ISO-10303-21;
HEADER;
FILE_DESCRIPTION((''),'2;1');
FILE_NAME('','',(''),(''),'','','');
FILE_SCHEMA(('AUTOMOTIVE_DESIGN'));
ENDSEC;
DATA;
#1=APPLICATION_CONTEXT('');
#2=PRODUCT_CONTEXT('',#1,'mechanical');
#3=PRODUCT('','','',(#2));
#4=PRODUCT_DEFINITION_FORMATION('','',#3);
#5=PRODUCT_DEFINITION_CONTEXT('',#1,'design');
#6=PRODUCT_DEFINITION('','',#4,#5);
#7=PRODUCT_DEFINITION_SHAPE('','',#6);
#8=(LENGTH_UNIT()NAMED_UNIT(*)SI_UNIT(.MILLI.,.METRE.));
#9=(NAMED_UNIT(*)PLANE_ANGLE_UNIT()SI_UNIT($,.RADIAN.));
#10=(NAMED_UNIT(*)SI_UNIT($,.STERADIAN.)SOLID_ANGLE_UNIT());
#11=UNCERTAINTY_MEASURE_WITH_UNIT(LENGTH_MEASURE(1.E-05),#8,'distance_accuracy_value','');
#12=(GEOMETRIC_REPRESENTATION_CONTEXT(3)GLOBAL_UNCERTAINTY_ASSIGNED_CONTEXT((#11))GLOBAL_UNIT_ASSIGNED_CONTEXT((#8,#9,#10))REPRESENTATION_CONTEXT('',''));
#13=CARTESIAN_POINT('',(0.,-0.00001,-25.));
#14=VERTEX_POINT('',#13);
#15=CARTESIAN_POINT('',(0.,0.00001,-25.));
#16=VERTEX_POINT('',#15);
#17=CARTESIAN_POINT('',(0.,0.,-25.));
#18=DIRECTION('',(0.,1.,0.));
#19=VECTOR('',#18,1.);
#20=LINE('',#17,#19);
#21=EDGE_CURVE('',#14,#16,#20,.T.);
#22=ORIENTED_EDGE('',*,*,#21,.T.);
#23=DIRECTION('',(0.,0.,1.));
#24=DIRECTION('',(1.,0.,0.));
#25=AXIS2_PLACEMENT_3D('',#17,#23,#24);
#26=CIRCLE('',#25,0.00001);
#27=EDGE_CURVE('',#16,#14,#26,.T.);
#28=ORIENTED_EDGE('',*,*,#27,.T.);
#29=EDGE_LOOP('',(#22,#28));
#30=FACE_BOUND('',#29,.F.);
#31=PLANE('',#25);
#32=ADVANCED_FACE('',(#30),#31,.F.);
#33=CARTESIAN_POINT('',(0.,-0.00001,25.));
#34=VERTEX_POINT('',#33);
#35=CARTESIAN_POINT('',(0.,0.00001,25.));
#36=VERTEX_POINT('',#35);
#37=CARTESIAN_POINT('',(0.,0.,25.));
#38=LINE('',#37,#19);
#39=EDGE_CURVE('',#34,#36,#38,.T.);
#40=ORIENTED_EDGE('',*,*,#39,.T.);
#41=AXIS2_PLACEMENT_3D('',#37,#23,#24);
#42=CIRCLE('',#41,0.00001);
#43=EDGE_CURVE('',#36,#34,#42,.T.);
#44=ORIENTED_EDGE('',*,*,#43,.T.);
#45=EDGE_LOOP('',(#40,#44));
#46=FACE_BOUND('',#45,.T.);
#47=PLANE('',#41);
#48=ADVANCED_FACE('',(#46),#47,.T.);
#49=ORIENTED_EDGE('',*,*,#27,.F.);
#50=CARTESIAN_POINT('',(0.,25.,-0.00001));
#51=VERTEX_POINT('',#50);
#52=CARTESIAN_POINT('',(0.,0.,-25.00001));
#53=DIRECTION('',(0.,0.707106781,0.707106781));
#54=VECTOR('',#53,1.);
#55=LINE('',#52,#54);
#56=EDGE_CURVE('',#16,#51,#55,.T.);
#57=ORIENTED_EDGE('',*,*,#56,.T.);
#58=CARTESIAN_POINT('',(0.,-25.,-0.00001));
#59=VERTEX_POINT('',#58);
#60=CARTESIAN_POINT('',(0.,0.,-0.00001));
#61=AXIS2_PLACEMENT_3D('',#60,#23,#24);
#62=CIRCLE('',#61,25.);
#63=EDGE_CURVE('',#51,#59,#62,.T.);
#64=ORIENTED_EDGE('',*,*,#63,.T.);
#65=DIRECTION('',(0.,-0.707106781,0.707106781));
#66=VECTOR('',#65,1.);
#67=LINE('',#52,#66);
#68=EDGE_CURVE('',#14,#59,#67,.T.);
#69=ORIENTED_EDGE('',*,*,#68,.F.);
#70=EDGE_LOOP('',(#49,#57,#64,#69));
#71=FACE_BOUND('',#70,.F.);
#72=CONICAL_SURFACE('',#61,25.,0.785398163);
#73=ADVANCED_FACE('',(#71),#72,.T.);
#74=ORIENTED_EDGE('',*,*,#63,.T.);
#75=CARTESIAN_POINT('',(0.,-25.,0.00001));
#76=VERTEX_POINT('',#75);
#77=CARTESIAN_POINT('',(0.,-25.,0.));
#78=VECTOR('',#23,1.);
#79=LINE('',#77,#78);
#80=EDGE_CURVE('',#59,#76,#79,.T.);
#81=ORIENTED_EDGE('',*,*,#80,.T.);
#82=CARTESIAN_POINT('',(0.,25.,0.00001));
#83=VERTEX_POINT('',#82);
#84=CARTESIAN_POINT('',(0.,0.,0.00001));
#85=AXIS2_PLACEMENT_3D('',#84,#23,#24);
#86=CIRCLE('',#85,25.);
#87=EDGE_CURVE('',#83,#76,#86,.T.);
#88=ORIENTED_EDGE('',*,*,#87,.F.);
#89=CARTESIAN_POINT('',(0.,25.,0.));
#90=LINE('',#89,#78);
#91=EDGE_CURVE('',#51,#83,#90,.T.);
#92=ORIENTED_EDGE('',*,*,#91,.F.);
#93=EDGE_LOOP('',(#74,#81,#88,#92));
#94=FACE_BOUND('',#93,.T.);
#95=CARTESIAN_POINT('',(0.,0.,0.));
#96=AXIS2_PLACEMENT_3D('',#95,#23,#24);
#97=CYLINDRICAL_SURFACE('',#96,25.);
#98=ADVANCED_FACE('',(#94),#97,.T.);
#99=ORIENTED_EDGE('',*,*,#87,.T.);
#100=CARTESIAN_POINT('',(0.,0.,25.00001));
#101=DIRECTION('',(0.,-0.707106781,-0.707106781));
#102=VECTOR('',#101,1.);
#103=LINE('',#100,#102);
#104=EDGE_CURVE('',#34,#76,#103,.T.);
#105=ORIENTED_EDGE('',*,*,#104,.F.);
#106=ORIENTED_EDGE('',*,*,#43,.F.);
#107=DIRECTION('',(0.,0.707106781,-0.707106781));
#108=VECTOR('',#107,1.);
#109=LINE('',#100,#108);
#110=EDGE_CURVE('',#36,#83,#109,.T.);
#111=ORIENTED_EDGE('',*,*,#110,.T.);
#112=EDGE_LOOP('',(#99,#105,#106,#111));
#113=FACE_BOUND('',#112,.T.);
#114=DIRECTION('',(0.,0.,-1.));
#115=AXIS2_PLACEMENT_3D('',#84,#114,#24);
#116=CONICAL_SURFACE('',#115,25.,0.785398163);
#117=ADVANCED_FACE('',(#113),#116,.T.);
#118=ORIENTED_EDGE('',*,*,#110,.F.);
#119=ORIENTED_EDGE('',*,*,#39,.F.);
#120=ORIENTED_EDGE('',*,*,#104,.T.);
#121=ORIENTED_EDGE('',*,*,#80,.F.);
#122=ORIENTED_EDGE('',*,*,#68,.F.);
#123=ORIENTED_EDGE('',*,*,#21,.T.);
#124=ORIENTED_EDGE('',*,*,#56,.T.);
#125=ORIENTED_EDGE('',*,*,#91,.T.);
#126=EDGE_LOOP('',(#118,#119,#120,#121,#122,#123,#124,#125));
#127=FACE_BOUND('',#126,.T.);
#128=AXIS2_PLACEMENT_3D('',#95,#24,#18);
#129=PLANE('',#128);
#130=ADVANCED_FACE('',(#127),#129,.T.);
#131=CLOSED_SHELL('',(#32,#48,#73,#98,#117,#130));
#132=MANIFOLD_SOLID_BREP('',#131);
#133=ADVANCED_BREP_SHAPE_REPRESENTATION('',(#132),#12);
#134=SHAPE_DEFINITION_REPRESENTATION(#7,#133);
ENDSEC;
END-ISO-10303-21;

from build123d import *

# Parameters (mm, degrees)
F0_R     = 25
F1_DEPTH = 25
F2_SIZE2 = 24.99999
F2_SIZE  = 24.99999
F3_W     = 55
F3_H     = 55
F4_DEPTH = 30


# Not quite as in the source:
# - a fillet or chamfer is up to 0.001 mm smaller than in the source, because OpenCascade refuses the exact size


with BuildPart() as f1:
    # F0 (on Top) → F1 (new body, symmetric)
    with BuildSketch(Plane.XY):
        Circle(F0_R)
    extrude(amount=F1_DEPTH, both=True)

    # F2 (size 25 and 25 in the source; OpenCascade refuses exactly that, so slightly less here)
    f2_edges = [f1.edges().sort_by_distance(p)[0] for p in [
        (-25, 0, 25),
        (-25, 0, -25),
    ]]
    chamfer(f2_edges, length=F2_SIZE, length2=F2_SIZE2)

    # F3 (on Right) → F4 (cut)
    with BuildSketch(Plane.YZ):
        Rectangle(F3_W, F3_H)
    extrude(amount=F4_DEPTH, mode=Mode.SUBTRACT)


solid = f1.part
